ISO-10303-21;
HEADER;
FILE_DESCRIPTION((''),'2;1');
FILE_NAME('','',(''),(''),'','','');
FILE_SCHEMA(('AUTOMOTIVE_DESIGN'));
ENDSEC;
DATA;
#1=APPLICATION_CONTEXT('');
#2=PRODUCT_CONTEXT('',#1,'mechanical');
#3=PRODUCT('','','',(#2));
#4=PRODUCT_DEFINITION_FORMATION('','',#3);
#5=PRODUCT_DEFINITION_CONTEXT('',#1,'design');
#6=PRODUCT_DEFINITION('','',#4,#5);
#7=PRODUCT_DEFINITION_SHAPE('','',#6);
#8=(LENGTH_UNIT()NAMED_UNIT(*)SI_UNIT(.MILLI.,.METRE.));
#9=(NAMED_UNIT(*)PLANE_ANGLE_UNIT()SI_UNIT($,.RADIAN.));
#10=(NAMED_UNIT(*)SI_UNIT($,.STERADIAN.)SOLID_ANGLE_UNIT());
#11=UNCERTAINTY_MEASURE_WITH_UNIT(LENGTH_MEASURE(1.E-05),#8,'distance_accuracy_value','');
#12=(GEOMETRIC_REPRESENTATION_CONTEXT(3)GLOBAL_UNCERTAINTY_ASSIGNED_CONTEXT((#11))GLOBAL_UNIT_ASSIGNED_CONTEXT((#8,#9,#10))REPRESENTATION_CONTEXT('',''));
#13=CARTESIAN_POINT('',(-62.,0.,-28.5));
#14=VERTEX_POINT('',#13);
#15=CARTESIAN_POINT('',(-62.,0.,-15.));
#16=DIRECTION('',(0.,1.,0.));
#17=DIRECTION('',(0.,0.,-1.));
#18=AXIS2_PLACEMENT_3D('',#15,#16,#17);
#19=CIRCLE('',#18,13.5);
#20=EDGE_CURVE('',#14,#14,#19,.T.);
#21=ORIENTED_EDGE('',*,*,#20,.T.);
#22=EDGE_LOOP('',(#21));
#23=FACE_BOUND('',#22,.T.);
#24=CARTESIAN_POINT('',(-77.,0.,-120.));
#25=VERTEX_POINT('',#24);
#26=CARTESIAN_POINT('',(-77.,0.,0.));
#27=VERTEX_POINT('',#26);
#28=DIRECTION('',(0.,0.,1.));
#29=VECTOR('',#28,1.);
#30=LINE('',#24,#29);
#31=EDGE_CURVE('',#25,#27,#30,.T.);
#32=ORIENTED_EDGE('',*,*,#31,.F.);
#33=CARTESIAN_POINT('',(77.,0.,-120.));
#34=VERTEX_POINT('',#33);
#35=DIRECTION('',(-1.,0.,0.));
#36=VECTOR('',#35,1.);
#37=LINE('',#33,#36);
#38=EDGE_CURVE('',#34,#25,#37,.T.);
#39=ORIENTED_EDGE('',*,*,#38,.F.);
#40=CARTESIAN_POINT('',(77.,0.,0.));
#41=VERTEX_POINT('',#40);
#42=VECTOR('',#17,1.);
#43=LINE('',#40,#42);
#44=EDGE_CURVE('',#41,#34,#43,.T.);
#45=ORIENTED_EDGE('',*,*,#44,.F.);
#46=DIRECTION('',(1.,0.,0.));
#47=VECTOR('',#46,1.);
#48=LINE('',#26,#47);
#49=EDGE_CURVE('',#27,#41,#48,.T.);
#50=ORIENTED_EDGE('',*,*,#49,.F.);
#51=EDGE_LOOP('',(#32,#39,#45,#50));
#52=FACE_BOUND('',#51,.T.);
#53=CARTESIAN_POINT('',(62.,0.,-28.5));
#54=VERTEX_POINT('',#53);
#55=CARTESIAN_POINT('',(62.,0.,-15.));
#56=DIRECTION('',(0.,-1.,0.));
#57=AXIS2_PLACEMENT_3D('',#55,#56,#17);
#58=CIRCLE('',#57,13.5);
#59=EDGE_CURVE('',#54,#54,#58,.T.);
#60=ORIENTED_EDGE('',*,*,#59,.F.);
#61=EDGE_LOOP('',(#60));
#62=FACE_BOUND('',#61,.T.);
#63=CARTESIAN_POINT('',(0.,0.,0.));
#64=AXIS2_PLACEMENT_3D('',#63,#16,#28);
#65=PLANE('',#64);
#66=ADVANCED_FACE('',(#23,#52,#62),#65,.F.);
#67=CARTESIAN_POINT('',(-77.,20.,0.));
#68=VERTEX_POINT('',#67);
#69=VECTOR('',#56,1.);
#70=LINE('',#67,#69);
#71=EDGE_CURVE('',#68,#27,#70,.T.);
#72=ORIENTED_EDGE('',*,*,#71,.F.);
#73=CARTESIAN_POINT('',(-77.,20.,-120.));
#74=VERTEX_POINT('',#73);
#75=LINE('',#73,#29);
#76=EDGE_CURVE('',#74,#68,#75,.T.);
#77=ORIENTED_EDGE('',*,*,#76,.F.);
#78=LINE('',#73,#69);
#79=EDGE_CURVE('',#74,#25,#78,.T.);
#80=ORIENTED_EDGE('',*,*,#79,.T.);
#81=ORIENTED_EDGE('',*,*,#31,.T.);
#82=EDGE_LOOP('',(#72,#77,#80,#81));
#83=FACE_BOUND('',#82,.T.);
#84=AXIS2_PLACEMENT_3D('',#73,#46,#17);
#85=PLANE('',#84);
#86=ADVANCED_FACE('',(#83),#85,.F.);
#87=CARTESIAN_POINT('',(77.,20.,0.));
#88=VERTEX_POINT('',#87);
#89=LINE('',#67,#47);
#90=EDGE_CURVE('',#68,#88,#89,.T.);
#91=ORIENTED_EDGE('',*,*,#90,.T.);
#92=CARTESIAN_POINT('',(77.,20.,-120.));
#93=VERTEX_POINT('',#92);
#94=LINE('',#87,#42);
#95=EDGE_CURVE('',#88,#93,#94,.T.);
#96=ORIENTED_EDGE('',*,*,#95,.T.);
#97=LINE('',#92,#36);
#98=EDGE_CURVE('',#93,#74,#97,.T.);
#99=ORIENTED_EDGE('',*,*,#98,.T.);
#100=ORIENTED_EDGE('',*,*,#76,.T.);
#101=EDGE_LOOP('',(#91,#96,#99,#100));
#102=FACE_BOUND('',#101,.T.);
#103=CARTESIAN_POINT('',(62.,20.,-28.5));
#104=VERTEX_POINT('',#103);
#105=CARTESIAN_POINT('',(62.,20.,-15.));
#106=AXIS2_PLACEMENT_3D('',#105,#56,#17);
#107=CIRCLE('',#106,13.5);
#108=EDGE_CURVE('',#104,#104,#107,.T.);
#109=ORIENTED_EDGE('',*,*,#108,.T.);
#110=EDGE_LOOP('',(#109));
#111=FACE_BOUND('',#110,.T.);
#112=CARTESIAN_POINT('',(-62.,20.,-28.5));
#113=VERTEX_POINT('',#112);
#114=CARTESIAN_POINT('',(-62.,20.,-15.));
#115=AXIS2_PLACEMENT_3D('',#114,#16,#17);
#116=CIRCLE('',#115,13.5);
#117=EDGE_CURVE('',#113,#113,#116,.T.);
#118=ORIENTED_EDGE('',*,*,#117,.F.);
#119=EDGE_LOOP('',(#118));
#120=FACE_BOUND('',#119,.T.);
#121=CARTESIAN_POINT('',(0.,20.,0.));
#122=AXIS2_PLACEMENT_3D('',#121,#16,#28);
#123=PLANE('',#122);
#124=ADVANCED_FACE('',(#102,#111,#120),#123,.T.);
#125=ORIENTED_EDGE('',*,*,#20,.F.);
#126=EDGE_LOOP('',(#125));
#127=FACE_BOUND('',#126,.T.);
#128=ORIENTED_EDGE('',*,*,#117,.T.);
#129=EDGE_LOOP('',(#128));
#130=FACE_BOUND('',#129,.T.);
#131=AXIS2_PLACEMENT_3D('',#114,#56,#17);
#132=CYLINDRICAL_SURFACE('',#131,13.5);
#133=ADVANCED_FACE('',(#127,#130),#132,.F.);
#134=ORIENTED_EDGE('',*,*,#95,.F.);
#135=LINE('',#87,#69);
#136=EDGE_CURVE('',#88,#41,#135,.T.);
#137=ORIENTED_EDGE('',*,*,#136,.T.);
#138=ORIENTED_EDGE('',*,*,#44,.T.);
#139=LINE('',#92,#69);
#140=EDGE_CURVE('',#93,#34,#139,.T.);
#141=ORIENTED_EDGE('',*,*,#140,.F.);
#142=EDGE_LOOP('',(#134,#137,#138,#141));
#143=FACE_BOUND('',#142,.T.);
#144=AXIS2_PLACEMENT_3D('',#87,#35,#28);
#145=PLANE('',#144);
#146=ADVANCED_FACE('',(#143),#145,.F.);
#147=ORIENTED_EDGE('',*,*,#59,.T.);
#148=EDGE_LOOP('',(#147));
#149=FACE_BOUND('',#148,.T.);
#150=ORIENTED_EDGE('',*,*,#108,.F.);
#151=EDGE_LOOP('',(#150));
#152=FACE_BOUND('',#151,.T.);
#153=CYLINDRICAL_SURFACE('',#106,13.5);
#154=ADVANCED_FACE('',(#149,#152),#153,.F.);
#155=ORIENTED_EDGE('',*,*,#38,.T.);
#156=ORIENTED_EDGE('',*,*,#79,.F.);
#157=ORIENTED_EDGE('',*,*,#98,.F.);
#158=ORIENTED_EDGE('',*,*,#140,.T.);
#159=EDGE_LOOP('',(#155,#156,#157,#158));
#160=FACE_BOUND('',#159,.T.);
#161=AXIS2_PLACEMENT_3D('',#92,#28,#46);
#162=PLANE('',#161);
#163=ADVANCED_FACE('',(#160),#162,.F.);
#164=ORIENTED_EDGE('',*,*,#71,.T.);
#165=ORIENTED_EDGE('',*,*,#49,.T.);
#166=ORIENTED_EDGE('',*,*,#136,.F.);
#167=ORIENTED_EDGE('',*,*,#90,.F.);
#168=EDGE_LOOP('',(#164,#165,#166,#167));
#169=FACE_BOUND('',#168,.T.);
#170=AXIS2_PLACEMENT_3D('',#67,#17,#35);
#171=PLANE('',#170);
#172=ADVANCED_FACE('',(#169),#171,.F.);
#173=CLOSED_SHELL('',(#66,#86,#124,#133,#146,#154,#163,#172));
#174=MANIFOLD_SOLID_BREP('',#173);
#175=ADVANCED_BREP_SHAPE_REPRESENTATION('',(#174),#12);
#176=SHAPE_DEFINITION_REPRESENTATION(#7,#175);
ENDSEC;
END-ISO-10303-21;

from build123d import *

# Parameters (mm, degrees)
BOSS_EXTRUDE1_OUTLINE_W = 154
BOSS_EXTRUDE1_OUTLINE_H = 120
BOSS_EXTRUDE1_DEPTH     = 20
SKETCH2_R               = 13.5
CUT_EXTRUDE3_DEPTH      = 144.975692393


# Read off the part's stored shape, not the designer's step: Boss-Extrude1
with BuildPart() as part:
    # Boss-Extrude1 outline → Boss-Extrude1 (new body)
    with BuildSketch(Plane(origin=(0, 0, 0), x_dir=(1, 0, 0), z_dir=(0, 1, 0))):
        with Locations((0, 60)):
            Rectangle(BOSS_EXTRUDE1_OUTLINE_W, BOSS_EXTRUDE1_OUTLINE_H)
    extrude(amount=BOSS_EXTRUDE1_DEPTH)

    # Sketch2 → Cut-Extrude3 (cut, through all)
    with BuildSketch(Plane.XZ):
        with Locations(Location((62, -15, 0), (0, 0, 270))):
            Circle(SKETCH2_R)
    cut_extrude3 = extrude(amount=-CUT_EXTRUDE3_DEPTH, mode=Mode.SUBTRACT)

    # Mirror1: Cut-Extrude3 across plane
    add(cut_extrude3.mirror(Plane(origin=(0, 0, 0), x_dir=(0, 0, 1), z_dir=(1, 0, 0))), mode=Mode.SUBTRACT)


solid = part.part
